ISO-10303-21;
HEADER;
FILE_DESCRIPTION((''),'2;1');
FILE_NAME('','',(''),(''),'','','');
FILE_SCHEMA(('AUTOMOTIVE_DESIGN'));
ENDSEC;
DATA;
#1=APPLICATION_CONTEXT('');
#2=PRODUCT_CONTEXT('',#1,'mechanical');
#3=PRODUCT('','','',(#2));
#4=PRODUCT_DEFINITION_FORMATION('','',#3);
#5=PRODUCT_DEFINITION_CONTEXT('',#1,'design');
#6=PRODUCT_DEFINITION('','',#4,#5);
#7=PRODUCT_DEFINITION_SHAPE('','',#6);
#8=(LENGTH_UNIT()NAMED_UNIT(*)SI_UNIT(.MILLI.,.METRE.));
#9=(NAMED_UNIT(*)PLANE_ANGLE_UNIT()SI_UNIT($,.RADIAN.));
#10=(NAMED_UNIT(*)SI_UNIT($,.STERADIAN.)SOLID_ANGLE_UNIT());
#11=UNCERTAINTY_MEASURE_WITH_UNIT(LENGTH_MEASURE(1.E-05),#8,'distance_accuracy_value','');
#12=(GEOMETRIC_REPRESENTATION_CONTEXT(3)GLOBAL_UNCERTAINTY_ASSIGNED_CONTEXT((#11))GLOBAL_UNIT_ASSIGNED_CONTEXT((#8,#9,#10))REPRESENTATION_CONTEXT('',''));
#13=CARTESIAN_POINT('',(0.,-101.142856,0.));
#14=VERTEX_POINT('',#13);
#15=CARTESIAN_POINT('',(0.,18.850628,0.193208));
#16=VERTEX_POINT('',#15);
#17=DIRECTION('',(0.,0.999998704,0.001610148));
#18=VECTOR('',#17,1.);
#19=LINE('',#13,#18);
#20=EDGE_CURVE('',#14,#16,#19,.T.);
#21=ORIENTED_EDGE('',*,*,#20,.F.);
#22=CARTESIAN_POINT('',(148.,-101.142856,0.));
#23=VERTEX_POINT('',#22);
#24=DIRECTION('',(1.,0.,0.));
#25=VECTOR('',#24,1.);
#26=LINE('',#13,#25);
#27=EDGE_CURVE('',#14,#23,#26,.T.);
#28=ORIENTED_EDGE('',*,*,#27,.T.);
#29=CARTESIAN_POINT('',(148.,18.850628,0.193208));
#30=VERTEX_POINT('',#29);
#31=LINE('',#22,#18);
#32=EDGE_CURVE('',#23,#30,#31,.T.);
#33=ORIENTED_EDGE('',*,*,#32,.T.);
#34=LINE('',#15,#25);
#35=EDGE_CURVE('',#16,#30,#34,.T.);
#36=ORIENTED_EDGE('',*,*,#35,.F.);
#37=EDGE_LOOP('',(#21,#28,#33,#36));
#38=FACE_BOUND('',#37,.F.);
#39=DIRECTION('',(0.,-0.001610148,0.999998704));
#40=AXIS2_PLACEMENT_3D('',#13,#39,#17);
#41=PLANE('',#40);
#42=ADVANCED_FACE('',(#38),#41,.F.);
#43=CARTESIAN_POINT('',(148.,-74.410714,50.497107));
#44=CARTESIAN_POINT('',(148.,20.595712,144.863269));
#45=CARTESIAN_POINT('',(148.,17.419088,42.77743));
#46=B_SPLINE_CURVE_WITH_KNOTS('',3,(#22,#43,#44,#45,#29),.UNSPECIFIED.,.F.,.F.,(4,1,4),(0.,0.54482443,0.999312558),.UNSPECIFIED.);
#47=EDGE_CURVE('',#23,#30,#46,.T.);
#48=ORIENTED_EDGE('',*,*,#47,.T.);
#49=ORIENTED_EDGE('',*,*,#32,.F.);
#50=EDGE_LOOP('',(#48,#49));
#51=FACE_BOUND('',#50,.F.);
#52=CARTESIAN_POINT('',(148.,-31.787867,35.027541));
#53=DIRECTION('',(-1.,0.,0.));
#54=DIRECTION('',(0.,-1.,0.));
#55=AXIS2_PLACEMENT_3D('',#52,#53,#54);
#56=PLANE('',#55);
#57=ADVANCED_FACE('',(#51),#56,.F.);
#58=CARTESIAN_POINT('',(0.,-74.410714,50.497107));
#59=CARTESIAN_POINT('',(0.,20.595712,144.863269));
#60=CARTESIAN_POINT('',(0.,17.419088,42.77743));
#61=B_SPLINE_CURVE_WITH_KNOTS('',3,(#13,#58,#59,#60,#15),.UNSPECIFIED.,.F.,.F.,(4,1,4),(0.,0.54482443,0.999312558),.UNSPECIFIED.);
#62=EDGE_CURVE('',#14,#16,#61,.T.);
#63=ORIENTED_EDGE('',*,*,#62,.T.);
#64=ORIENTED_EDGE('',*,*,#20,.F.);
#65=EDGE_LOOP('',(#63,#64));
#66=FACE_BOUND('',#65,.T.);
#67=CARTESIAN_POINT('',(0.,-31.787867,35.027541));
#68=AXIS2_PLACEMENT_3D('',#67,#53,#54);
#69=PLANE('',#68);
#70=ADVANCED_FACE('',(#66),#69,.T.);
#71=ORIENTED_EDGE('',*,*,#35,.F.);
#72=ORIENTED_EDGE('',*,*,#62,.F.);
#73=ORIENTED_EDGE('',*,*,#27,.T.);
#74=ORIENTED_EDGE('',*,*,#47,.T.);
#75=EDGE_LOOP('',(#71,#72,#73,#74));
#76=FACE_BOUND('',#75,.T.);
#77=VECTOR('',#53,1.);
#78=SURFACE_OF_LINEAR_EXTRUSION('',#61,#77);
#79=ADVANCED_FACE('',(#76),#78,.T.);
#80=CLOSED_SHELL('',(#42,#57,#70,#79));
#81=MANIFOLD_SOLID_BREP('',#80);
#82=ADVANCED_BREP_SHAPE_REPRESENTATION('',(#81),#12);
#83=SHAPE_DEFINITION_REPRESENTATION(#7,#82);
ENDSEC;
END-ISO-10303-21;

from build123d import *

# Parameters (mm, degrees)
F1_DEPTH = 148


with BuildPart() as f1:
    # F0 (on Right) → F1 (new body)
    with BuildSketch(Plane.YZ):
        with BuildLine():
            add(Edge.make_bspline(
                [(-101.1428560598, 0), (-74.4107142091, 50.4971072078), (20.5957118857, 144.8632694137), (17.4190876133, 42.7774296872), (18.8506282277, 0.1932075578)],
                knots=[0, 0, 0, 0, 0.5448244301, 0.9993125576, 0.9993125576, 0.9993125576, 0.9993125576], degree=3))
            Line((-101.1428560598, 0), (18.8506282277, 0.1932075578))
        make_face()
    extrude(amount=F1_DEPTH)


solid = f1.part
